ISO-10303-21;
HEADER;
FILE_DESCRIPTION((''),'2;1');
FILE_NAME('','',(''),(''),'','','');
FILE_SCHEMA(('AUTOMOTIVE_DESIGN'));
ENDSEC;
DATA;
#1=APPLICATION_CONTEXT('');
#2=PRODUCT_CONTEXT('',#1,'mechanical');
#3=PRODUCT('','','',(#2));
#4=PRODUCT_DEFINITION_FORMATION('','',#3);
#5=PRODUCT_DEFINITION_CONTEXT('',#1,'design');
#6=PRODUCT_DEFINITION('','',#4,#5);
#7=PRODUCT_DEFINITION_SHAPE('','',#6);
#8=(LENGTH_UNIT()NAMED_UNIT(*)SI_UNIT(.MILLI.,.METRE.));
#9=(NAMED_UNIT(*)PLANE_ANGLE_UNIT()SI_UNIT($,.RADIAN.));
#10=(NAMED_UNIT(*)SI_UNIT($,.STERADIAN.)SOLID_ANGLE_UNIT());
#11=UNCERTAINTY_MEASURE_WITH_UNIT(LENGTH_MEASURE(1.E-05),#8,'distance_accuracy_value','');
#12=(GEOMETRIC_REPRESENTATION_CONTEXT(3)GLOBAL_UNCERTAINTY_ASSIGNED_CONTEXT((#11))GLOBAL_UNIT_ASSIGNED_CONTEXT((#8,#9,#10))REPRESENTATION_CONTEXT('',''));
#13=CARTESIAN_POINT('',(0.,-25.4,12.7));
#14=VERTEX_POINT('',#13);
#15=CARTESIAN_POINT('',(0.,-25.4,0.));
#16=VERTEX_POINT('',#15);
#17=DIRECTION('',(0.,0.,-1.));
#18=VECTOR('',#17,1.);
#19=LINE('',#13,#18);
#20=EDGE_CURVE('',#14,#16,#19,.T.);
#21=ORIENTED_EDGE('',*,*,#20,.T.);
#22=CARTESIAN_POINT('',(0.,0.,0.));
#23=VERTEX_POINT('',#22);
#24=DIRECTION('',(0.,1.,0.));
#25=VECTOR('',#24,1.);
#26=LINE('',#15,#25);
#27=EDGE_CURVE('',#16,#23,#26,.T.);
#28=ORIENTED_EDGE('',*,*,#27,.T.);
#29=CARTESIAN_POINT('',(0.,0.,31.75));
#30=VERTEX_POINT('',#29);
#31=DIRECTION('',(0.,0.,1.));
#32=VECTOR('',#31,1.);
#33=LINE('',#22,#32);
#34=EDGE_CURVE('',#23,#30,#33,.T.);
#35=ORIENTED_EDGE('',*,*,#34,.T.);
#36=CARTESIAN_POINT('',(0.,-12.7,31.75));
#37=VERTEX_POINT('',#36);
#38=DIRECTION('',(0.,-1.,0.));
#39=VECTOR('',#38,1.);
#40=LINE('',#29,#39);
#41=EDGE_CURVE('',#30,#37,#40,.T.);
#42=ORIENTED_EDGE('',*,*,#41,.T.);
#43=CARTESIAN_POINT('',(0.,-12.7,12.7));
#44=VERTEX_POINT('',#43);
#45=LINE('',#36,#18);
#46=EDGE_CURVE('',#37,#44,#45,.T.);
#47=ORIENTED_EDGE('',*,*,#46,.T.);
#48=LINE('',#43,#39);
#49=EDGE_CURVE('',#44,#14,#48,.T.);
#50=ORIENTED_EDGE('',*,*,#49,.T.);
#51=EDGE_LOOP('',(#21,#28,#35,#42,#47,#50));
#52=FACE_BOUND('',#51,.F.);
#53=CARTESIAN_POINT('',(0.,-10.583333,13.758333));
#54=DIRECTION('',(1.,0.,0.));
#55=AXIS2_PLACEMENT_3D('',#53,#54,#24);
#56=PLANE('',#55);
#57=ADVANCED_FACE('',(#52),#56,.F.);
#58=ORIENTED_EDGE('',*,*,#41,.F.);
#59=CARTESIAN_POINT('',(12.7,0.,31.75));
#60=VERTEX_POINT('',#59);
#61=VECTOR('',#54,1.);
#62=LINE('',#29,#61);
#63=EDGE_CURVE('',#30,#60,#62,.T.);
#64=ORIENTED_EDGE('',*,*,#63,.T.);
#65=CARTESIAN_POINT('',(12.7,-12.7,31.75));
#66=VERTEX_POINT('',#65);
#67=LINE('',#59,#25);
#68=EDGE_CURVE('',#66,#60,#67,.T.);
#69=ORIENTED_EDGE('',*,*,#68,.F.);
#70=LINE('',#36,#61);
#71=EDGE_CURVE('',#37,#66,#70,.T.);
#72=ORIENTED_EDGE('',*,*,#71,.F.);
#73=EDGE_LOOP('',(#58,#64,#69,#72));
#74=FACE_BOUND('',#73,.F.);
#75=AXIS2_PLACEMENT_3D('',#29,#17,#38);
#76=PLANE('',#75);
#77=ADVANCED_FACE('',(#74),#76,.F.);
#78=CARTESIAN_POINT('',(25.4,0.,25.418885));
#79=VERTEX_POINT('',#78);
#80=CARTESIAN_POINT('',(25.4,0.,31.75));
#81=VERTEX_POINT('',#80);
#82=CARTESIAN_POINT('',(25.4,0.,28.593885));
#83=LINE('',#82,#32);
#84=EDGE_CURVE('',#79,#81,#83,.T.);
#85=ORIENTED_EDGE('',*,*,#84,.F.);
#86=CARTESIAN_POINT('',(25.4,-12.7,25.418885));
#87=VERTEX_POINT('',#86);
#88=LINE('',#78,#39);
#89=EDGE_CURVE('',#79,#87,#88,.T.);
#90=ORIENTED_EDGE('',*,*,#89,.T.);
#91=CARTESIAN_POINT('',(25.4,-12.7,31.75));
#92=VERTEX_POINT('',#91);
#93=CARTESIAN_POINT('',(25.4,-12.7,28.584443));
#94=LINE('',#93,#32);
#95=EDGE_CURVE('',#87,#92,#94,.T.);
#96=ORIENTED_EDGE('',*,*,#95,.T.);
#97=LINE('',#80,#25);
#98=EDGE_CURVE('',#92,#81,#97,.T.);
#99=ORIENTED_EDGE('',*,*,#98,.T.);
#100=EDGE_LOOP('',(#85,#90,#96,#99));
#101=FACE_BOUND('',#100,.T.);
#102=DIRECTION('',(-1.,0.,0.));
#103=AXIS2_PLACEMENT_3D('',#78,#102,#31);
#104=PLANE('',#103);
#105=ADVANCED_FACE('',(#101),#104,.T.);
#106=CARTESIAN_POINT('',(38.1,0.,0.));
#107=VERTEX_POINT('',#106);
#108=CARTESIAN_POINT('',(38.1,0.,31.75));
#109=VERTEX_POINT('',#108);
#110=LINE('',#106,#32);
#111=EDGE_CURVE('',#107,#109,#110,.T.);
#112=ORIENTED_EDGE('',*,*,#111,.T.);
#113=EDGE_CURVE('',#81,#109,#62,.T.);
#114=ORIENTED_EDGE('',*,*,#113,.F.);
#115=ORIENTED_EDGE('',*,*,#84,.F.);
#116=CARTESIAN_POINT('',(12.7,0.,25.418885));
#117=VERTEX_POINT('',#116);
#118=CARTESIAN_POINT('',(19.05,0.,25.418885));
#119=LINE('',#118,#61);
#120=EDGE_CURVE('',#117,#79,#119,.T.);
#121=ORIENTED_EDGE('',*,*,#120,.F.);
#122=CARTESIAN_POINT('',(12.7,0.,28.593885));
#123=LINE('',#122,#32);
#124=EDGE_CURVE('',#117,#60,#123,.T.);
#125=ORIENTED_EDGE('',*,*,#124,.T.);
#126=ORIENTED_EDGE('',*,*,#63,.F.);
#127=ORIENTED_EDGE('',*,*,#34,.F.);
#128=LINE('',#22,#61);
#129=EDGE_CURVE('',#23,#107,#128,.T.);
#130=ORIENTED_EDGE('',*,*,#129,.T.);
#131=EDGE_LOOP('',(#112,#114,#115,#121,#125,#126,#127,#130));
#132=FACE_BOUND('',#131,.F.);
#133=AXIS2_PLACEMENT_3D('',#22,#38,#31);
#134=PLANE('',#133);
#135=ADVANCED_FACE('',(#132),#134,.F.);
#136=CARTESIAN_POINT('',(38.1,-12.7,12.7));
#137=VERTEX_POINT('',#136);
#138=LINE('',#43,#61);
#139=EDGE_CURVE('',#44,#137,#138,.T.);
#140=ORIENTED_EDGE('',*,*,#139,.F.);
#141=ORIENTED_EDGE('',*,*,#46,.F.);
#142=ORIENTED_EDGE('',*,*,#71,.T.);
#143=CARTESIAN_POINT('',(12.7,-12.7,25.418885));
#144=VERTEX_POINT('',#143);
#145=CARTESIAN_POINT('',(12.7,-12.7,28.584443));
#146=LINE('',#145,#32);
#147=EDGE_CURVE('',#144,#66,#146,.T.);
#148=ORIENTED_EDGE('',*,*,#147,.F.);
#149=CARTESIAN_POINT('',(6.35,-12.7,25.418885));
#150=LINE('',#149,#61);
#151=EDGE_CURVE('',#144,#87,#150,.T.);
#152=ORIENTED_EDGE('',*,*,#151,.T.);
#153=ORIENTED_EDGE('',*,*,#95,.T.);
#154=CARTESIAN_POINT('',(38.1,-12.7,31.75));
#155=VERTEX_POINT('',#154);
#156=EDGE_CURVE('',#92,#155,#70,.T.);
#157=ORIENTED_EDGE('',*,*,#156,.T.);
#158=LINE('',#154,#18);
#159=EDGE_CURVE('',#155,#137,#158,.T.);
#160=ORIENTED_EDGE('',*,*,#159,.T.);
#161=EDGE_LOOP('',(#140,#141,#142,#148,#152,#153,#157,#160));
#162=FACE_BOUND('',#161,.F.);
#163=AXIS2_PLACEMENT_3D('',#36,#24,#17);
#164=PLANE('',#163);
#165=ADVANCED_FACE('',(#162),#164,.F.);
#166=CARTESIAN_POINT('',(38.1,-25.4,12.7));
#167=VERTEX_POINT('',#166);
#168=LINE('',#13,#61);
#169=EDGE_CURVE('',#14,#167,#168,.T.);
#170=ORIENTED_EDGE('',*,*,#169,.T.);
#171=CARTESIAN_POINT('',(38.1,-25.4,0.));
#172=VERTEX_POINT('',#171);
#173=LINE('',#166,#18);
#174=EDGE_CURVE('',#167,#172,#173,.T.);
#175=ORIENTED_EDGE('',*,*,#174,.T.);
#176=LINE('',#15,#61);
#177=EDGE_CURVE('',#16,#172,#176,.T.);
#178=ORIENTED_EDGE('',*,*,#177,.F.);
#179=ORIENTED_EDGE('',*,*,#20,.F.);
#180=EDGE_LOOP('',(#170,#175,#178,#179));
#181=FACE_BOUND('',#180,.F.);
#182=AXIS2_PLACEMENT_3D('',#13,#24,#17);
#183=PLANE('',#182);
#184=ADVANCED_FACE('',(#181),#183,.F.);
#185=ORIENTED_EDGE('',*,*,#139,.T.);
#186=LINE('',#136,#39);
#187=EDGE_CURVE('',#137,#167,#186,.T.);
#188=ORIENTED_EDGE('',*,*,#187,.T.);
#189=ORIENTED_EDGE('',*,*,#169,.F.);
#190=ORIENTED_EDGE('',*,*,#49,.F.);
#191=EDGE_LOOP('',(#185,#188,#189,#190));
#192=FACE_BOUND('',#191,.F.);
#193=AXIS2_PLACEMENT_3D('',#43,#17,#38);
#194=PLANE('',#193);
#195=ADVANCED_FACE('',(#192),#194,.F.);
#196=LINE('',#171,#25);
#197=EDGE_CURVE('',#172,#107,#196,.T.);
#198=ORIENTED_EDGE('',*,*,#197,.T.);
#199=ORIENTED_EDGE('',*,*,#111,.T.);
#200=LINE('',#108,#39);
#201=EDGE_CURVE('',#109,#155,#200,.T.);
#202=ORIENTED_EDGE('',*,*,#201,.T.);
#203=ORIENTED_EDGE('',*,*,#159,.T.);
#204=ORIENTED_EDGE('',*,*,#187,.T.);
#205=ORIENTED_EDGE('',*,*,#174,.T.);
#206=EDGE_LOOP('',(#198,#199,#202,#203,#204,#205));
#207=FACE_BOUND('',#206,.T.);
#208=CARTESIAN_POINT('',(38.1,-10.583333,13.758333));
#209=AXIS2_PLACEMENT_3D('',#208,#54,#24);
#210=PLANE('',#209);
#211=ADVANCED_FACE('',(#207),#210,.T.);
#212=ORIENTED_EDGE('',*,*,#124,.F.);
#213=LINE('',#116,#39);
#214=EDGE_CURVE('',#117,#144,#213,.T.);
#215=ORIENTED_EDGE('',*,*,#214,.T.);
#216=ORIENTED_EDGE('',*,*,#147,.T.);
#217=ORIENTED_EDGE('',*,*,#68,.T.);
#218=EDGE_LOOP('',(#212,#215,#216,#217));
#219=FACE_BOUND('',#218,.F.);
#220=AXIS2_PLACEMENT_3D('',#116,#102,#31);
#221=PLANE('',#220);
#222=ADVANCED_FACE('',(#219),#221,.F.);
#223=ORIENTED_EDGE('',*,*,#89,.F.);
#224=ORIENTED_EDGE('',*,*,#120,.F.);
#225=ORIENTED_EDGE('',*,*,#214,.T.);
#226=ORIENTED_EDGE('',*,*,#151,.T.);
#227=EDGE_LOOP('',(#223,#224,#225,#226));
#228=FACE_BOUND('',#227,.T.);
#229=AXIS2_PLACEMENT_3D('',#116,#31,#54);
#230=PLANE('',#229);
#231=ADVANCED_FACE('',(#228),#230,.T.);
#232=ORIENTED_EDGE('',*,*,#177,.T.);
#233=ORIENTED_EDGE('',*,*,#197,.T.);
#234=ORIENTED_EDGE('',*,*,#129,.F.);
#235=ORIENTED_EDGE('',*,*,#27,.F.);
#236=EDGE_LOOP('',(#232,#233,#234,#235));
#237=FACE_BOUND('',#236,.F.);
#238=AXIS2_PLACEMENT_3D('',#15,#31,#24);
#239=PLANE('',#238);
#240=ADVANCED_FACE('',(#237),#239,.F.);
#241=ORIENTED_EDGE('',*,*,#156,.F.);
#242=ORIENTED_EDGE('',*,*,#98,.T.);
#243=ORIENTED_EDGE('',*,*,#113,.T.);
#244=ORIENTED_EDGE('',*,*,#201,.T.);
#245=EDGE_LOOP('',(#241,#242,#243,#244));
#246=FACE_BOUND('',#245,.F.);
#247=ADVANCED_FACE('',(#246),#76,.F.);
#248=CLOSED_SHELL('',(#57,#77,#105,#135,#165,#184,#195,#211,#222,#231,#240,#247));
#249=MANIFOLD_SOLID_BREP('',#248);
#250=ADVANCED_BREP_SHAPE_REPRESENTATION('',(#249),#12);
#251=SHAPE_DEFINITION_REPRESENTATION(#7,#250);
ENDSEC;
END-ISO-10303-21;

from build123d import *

# Parameters (mm, degrees)
F1_DEPTH = 38.1
F2_W     = 12.7
F2_H     = 6.35
F3_DEPTH = 81
F4_W     = 12.7
F4_H     = 6.35
F5_DEPTH = 81
F6_W     = 12.7
F6_H     = 6.35
F7_DEPTH = 81
F8_DEPTH = 25.401


# Not quite as in the source:
# - an extrude ends at something that could not be found from the text; its depth is read off the source's solid


with BuildPart() as f1:
    # F0 (on Right) → F1 (new body)
    with BuildSketch(Plane.YZ):
        Polygon((0, 0), (0, 31.75), (-12.7, 31.75), (-12.7, 12.7), (-25.4, 12.7), (-25.4, 0), align=None)
    extrude(amount=F1_DEPTH)

    # F2 (on Front) → F3 (cut, through all)
    with BuildSketch(Plane.XZ):
        with Locations((19.05, 29.0438578556)):
            Rectangle(F2_W, F2_H)
    extrude(amount=-F3_DEPTH, mode=Mode.SUBTRACT)

    # F4 (on Front) → F5 (cut, through all)
    with BuildSketch(Plane.XZ):
        with Locations((19.05, 28.5938853313)):
            Rectangle(F4_W, F4_H)
    extrude(amount=-F5_DEPTH, mode=Mode.SUBTRACT)

    # F6 (on Front) → F7 (cut, through all)
    with BuildSketch(Plane.XZ):
        with Locations((19.05, 28.9610116338)):
            Rectangle(F6_W, F6_H)
    extrude(amount=-F7_DEPTH, mode=Mode.SUBTRACT)

    # F4 (on Front) → F8 (cut, through all)
    with BuildSketch(Plane.XZ):
        with Locations((19.05, 28.5938853313)):
            Rectangle(F4_W, F4_H)
    extrude(amount=F8_DEPTH, mode=Mode.SUBTRACT)


solid = f1.part
